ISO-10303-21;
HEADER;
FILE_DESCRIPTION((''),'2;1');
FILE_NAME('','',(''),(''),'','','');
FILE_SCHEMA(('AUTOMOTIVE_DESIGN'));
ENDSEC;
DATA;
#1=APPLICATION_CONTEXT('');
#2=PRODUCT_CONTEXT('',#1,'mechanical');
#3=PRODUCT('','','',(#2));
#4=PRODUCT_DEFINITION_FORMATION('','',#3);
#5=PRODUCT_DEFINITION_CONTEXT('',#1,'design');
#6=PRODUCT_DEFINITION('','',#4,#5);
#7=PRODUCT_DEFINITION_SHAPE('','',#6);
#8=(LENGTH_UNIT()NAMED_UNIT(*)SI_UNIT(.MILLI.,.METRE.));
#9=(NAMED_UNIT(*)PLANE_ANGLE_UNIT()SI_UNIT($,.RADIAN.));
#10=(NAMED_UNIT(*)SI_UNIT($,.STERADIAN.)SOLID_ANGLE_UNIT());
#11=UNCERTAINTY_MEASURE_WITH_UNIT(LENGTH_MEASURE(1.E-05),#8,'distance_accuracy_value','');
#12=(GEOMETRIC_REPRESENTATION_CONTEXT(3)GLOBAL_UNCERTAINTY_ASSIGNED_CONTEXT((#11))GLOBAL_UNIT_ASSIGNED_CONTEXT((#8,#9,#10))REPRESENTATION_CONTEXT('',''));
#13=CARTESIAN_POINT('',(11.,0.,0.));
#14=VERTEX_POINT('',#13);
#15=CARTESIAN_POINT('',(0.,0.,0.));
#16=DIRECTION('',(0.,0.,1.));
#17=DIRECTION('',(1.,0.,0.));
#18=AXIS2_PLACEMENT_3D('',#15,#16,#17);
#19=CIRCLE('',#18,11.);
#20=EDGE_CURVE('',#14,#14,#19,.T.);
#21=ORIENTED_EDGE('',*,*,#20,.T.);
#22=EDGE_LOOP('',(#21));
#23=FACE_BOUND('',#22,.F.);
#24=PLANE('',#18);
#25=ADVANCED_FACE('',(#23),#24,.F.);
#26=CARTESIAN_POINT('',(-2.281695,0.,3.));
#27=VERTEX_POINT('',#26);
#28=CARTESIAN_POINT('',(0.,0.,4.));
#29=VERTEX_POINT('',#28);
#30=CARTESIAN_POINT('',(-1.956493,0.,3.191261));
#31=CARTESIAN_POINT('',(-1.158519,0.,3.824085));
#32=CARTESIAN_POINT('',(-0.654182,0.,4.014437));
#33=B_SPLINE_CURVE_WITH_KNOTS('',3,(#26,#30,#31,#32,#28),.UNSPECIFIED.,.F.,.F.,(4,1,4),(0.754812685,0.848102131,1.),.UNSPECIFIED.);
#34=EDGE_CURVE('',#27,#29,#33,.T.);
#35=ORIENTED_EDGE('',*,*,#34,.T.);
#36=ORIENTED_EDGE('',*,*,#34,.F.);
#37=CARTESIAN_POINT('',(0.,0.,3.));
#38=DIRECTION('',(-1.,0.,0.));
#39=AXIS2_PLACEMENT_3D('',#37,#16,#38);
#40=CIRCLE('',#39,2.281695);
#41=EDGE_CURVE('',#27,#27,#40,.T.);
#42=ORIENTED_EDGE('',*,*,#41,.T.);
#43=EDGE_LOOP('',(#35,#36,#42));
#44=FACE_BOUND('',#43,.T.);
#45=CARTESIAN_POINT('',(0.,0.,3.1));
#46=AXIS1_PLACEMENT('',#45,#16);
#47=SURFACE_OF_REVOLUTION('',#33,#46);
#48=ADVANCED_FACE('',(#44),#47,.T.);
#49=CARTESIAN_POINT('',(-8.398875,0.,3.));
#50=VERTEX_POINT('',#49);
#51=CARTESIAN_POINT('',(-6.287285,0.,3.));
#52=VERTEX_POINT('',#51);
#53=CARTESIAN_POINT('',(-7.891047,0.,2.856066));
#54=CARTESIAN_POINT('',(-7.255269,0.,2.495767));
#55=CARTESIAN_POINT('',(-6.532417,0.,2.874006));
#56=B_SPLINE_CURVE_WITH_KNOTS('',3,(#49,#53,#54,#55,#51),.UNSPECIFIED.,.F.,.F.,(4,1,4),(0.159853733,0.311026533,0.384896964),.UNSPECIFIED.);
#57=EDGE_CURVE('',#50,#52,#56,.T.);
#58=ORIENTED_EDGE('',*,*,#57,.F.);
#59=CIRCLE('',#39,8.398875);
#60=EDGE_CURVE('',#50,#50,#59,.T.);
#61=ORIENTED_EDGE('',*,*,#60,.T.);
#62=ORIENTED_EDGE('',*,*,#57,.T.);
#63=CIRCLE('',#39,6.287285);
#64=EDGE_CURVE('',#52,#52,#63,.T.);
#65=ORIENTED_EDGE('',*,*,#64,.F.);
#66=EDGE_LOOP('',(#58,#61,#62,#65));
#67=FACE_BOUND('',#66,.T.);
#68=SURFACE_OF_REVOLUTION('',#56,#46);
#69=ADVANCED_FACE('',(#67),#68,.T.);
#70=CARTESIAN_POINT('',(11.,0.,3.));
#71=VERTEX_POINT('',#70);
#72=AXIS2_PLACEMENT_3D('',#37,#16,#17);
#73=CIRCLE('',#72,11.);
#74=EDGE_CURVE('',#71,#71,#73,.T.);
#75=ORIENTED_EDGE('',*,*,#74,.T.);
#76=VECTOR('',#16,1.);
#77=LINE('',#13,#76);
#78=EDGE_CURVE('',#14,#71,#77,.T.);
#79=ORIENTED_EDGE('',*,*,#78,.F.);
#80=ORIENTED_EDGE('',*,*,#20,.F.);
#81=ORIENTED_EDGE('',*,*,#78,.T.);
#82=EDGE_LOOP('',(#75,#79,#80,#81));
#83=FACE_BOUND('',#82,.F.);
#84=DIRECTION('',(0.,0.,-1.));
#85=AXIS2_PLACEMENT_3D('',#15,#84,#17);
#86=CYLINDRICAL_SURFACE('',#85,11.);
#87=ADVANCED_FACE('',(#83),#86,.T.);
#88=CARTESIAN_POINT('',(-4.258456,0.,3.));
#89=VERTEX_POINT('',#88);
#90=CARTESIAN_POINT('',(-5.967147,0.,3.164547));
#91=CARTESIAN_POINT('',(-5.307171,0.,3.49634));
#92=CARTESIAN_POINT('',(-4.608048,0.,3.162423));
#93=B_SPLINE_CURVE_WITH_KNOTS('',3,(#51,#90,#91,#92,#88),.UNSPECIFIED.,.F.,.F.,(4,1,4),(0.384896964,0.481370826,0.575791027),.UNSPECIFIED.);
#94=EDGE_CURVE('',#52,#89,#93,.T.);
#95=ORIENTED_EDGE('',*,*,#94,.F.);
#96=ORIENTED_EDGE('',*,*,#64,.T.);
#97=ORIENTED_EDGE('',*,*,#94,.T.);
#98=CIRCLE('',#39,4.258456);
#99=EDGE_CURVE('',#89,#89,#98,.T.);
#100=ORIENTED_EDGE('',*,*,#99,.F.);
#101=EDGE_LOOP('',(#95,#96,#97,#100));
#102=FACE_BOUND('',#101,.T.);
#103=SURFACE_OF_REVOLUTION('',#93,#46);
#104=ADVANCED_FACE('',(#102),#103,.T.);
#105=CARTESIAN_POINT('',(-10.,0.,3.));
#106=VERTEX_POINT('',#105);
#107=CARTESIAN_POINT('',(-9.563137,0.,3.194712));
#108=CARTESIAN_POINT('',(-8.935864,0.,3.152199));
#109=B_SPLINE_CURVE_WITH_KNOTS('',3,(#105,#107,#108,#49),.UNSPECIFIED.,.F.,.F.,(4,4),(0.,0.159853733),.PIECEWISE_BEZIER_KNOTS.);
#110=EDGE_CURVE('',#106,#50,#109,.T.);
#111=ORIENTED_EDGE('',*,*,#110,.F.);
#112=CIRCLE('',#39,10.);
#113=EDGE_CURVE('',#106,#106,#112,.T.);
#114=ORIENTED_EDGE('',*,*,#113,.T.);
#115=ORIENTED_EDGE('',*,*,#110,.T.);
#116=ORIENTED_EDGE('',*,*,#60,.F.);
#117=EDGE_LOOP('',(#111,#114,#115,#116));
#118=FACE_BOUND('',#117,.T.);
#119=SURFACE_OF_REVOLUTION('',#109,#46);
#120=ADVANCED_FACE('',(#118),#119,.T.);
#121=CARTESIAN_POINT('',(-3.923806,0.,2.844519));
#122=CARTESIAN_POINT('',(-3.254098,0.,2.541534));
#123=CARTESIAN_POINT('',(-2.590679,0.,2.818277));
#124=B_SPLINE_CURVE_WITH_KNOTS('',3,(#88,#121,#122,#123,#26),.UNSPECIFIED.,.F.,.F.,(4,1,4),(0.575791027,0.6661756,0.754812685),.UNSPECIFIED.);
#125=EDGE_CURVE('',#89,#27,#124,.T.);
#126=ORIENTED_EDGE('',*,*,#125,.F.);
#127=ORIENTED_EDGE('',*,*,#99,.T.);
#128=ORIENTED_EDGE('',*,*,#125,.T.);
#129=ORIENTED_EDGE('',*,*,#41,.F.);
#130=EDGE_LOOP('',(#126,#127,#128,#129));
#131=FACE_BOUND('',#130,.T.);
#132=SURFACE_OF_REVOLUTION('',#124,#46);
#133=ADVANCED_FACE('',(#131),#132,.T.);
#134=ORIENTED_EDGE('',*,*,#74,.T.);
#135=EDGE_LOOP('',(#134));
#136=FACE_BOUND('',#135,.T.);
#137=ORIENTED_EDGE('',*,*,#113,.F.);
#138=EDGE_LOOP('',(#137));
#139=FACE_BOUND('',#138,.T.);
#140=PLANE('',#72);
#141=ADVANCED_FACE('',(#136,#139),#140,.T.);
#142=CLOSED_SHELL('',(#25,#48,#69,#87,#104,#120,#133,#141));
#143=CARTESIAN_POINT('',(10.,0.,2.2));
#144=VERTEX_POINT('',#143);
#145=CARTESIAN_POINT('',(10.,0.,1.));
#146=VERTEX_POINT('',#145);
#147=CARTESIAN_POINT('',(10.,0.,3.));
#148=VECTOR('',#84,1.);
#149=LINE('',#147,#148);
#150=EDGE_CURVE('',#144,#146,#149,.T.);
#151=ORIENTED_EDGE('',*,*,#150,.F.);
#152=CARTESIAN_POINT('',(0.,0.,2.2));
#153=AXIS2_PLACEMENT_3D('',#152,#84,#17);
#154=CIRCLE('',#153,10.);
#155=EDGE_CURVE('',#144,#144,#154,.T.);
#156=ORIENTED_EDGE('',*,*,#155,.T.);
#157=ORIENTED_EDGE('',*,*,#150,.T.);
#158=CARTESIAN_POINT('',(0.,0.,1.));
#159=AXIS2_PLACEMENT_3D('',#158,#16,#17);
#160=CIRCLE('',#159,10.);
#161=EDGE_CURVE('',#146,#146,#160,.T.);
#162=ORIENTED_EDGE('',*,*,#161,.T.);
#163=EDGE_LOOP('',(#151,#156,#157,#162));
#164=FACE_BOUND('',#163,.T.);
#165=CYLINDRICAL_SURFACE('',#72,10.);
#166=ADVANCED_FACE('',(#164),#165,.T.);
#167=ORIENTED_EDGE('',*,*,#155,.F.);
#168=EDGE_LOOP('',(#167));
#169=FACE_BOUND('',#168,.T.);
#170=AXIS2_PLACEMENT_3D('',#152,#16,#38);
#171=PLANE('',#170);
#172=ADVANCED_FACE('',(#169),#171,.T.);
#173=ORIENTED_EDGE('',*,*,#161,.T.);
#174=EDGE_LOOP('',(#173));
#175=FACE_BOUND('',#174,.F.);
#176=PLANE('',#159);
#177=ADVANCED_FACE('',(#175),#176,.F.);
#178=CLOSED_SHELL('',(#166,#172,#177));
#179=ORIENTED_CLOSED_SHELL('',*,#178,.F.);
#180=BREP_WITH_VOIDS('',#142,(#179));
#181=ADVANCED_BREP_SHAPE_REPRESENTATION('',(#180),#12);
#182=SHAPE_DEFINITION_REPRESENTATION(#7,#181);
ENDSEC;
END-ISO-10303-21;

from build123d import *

# Parameters (mm, degrees)
F0_R     = 11
F1_DEPTH = 3
F2_R     = 10
F3_DEPTH = 2


with BuildPart() as f1:
    # F0 (on Top) → F1 (new body)
    with BuildSketch(Plane.XY):
        Circle(F0_R)
    extrude(amount=F1_DEPTH)

    # F2 (on face) → F3 (cut)
    with BuildSketch(Plane.XY.offset(3)):
        Circle(F2_R)
    extrude(amount=-F3_DEPTH, mode=Mode.SUBTRACT)

    # F4 (on Front) → F5 (revolve)
    with BuildSketch(Plane.XZ):
        with BuildLine():
            add(Edge.make_bspline(
                [(-10, 3), (-9.5631365163, 3.1947120998), (-8.9358639257, 3.1521992443), (-8.3988746628, 3)],
                knots=[0, 0, 0, 0, 0.1598537325, 0.1598537325, 0.1598537325, 0.1598537325], degree=3))
            Line((-10, 3), (-8.3988746628, 3))
        make_face()
        with BuildLine():
            Line((-8.3988746628, 3), (-10, 3))
            Line((-10, 3), (-10, 2.2))
            Line((-10, 2.2), (0, 2.2))
            Line((0, 2.2), (0, 3))
            Line((0, 3), (-2.2816949674, 3))
            add(Edge.make_bspline(
                [(-4.2584559222, 3), (-3.9238062504, 2.8445189646), (-3.2540976505, 2.5415343681), (-2.5906789659, 2.8182773792), (-2.2816949674, 3)],
                knots=[0.5757910273, 0.5757910273, 0.5757910273, 0.5757910273, 0.6661755998, 0.754812685, 0.754812685, 0.754812685, 0.754812685], degree=3))
            Line((-4.2584559222, 3), (-6.2872854841, 3))
            add(Edge.make_bspline(
                [(-8.3988746628, 3), (-7.8910468525, 2.8560660067), (-7.2552687251, 2.4957672366), (-6.5324171697, 2.8740056535), (-6.2872854841, 3)],
                knots=[0.1598537325, 0.1598537325, 0.1598537325, 0.1598537325, 0.3110265335, 0.3848969639, 0.3848969639, 0.3848969639, 0.3848969639], degree=3))
        make_face()
        with BuildLine():
            add(Edge.make_bspline(
                [(-6.2872854841, 3), (-5.9671465556, 3.1645470474), (-5.3071713867, 3.4963401186), (-4.6080475442, 3.1624231904), (-4.2584559222, 3)],
                knots=[0.3848969639, 0.3848969639, 0.3848969639, 0.3848969639, 0.4813708261, 0.5757910273, 0.5757910273, 0.5757910273, 0.5757910273], degree=3))
            Line((-6.2872854841, 3), (-4.2584559222, 3))
        make_face()
        with BuildLine():
            Line((-2.2816949674, 3), (0, 3))
            Line((0, 3), (0, 4))
            add(Edge.make_bspline(
                [(-2.2816949674, 3), (-1.9564930944, 3.191260832), (-1.1585189995, 3.8240848781), (-0.654182455, 4.0144366212), (0, 4)],
                knots=[0.754812685, 0.754812685, 0.754812685, 0.754812685, 0.8481021313, 1, 1, 1, 1], degree=3))
        make_face()
    revolve(axis=Axis((0, 0, 3.1), (0, 0, 1)))


solid = f1.part
